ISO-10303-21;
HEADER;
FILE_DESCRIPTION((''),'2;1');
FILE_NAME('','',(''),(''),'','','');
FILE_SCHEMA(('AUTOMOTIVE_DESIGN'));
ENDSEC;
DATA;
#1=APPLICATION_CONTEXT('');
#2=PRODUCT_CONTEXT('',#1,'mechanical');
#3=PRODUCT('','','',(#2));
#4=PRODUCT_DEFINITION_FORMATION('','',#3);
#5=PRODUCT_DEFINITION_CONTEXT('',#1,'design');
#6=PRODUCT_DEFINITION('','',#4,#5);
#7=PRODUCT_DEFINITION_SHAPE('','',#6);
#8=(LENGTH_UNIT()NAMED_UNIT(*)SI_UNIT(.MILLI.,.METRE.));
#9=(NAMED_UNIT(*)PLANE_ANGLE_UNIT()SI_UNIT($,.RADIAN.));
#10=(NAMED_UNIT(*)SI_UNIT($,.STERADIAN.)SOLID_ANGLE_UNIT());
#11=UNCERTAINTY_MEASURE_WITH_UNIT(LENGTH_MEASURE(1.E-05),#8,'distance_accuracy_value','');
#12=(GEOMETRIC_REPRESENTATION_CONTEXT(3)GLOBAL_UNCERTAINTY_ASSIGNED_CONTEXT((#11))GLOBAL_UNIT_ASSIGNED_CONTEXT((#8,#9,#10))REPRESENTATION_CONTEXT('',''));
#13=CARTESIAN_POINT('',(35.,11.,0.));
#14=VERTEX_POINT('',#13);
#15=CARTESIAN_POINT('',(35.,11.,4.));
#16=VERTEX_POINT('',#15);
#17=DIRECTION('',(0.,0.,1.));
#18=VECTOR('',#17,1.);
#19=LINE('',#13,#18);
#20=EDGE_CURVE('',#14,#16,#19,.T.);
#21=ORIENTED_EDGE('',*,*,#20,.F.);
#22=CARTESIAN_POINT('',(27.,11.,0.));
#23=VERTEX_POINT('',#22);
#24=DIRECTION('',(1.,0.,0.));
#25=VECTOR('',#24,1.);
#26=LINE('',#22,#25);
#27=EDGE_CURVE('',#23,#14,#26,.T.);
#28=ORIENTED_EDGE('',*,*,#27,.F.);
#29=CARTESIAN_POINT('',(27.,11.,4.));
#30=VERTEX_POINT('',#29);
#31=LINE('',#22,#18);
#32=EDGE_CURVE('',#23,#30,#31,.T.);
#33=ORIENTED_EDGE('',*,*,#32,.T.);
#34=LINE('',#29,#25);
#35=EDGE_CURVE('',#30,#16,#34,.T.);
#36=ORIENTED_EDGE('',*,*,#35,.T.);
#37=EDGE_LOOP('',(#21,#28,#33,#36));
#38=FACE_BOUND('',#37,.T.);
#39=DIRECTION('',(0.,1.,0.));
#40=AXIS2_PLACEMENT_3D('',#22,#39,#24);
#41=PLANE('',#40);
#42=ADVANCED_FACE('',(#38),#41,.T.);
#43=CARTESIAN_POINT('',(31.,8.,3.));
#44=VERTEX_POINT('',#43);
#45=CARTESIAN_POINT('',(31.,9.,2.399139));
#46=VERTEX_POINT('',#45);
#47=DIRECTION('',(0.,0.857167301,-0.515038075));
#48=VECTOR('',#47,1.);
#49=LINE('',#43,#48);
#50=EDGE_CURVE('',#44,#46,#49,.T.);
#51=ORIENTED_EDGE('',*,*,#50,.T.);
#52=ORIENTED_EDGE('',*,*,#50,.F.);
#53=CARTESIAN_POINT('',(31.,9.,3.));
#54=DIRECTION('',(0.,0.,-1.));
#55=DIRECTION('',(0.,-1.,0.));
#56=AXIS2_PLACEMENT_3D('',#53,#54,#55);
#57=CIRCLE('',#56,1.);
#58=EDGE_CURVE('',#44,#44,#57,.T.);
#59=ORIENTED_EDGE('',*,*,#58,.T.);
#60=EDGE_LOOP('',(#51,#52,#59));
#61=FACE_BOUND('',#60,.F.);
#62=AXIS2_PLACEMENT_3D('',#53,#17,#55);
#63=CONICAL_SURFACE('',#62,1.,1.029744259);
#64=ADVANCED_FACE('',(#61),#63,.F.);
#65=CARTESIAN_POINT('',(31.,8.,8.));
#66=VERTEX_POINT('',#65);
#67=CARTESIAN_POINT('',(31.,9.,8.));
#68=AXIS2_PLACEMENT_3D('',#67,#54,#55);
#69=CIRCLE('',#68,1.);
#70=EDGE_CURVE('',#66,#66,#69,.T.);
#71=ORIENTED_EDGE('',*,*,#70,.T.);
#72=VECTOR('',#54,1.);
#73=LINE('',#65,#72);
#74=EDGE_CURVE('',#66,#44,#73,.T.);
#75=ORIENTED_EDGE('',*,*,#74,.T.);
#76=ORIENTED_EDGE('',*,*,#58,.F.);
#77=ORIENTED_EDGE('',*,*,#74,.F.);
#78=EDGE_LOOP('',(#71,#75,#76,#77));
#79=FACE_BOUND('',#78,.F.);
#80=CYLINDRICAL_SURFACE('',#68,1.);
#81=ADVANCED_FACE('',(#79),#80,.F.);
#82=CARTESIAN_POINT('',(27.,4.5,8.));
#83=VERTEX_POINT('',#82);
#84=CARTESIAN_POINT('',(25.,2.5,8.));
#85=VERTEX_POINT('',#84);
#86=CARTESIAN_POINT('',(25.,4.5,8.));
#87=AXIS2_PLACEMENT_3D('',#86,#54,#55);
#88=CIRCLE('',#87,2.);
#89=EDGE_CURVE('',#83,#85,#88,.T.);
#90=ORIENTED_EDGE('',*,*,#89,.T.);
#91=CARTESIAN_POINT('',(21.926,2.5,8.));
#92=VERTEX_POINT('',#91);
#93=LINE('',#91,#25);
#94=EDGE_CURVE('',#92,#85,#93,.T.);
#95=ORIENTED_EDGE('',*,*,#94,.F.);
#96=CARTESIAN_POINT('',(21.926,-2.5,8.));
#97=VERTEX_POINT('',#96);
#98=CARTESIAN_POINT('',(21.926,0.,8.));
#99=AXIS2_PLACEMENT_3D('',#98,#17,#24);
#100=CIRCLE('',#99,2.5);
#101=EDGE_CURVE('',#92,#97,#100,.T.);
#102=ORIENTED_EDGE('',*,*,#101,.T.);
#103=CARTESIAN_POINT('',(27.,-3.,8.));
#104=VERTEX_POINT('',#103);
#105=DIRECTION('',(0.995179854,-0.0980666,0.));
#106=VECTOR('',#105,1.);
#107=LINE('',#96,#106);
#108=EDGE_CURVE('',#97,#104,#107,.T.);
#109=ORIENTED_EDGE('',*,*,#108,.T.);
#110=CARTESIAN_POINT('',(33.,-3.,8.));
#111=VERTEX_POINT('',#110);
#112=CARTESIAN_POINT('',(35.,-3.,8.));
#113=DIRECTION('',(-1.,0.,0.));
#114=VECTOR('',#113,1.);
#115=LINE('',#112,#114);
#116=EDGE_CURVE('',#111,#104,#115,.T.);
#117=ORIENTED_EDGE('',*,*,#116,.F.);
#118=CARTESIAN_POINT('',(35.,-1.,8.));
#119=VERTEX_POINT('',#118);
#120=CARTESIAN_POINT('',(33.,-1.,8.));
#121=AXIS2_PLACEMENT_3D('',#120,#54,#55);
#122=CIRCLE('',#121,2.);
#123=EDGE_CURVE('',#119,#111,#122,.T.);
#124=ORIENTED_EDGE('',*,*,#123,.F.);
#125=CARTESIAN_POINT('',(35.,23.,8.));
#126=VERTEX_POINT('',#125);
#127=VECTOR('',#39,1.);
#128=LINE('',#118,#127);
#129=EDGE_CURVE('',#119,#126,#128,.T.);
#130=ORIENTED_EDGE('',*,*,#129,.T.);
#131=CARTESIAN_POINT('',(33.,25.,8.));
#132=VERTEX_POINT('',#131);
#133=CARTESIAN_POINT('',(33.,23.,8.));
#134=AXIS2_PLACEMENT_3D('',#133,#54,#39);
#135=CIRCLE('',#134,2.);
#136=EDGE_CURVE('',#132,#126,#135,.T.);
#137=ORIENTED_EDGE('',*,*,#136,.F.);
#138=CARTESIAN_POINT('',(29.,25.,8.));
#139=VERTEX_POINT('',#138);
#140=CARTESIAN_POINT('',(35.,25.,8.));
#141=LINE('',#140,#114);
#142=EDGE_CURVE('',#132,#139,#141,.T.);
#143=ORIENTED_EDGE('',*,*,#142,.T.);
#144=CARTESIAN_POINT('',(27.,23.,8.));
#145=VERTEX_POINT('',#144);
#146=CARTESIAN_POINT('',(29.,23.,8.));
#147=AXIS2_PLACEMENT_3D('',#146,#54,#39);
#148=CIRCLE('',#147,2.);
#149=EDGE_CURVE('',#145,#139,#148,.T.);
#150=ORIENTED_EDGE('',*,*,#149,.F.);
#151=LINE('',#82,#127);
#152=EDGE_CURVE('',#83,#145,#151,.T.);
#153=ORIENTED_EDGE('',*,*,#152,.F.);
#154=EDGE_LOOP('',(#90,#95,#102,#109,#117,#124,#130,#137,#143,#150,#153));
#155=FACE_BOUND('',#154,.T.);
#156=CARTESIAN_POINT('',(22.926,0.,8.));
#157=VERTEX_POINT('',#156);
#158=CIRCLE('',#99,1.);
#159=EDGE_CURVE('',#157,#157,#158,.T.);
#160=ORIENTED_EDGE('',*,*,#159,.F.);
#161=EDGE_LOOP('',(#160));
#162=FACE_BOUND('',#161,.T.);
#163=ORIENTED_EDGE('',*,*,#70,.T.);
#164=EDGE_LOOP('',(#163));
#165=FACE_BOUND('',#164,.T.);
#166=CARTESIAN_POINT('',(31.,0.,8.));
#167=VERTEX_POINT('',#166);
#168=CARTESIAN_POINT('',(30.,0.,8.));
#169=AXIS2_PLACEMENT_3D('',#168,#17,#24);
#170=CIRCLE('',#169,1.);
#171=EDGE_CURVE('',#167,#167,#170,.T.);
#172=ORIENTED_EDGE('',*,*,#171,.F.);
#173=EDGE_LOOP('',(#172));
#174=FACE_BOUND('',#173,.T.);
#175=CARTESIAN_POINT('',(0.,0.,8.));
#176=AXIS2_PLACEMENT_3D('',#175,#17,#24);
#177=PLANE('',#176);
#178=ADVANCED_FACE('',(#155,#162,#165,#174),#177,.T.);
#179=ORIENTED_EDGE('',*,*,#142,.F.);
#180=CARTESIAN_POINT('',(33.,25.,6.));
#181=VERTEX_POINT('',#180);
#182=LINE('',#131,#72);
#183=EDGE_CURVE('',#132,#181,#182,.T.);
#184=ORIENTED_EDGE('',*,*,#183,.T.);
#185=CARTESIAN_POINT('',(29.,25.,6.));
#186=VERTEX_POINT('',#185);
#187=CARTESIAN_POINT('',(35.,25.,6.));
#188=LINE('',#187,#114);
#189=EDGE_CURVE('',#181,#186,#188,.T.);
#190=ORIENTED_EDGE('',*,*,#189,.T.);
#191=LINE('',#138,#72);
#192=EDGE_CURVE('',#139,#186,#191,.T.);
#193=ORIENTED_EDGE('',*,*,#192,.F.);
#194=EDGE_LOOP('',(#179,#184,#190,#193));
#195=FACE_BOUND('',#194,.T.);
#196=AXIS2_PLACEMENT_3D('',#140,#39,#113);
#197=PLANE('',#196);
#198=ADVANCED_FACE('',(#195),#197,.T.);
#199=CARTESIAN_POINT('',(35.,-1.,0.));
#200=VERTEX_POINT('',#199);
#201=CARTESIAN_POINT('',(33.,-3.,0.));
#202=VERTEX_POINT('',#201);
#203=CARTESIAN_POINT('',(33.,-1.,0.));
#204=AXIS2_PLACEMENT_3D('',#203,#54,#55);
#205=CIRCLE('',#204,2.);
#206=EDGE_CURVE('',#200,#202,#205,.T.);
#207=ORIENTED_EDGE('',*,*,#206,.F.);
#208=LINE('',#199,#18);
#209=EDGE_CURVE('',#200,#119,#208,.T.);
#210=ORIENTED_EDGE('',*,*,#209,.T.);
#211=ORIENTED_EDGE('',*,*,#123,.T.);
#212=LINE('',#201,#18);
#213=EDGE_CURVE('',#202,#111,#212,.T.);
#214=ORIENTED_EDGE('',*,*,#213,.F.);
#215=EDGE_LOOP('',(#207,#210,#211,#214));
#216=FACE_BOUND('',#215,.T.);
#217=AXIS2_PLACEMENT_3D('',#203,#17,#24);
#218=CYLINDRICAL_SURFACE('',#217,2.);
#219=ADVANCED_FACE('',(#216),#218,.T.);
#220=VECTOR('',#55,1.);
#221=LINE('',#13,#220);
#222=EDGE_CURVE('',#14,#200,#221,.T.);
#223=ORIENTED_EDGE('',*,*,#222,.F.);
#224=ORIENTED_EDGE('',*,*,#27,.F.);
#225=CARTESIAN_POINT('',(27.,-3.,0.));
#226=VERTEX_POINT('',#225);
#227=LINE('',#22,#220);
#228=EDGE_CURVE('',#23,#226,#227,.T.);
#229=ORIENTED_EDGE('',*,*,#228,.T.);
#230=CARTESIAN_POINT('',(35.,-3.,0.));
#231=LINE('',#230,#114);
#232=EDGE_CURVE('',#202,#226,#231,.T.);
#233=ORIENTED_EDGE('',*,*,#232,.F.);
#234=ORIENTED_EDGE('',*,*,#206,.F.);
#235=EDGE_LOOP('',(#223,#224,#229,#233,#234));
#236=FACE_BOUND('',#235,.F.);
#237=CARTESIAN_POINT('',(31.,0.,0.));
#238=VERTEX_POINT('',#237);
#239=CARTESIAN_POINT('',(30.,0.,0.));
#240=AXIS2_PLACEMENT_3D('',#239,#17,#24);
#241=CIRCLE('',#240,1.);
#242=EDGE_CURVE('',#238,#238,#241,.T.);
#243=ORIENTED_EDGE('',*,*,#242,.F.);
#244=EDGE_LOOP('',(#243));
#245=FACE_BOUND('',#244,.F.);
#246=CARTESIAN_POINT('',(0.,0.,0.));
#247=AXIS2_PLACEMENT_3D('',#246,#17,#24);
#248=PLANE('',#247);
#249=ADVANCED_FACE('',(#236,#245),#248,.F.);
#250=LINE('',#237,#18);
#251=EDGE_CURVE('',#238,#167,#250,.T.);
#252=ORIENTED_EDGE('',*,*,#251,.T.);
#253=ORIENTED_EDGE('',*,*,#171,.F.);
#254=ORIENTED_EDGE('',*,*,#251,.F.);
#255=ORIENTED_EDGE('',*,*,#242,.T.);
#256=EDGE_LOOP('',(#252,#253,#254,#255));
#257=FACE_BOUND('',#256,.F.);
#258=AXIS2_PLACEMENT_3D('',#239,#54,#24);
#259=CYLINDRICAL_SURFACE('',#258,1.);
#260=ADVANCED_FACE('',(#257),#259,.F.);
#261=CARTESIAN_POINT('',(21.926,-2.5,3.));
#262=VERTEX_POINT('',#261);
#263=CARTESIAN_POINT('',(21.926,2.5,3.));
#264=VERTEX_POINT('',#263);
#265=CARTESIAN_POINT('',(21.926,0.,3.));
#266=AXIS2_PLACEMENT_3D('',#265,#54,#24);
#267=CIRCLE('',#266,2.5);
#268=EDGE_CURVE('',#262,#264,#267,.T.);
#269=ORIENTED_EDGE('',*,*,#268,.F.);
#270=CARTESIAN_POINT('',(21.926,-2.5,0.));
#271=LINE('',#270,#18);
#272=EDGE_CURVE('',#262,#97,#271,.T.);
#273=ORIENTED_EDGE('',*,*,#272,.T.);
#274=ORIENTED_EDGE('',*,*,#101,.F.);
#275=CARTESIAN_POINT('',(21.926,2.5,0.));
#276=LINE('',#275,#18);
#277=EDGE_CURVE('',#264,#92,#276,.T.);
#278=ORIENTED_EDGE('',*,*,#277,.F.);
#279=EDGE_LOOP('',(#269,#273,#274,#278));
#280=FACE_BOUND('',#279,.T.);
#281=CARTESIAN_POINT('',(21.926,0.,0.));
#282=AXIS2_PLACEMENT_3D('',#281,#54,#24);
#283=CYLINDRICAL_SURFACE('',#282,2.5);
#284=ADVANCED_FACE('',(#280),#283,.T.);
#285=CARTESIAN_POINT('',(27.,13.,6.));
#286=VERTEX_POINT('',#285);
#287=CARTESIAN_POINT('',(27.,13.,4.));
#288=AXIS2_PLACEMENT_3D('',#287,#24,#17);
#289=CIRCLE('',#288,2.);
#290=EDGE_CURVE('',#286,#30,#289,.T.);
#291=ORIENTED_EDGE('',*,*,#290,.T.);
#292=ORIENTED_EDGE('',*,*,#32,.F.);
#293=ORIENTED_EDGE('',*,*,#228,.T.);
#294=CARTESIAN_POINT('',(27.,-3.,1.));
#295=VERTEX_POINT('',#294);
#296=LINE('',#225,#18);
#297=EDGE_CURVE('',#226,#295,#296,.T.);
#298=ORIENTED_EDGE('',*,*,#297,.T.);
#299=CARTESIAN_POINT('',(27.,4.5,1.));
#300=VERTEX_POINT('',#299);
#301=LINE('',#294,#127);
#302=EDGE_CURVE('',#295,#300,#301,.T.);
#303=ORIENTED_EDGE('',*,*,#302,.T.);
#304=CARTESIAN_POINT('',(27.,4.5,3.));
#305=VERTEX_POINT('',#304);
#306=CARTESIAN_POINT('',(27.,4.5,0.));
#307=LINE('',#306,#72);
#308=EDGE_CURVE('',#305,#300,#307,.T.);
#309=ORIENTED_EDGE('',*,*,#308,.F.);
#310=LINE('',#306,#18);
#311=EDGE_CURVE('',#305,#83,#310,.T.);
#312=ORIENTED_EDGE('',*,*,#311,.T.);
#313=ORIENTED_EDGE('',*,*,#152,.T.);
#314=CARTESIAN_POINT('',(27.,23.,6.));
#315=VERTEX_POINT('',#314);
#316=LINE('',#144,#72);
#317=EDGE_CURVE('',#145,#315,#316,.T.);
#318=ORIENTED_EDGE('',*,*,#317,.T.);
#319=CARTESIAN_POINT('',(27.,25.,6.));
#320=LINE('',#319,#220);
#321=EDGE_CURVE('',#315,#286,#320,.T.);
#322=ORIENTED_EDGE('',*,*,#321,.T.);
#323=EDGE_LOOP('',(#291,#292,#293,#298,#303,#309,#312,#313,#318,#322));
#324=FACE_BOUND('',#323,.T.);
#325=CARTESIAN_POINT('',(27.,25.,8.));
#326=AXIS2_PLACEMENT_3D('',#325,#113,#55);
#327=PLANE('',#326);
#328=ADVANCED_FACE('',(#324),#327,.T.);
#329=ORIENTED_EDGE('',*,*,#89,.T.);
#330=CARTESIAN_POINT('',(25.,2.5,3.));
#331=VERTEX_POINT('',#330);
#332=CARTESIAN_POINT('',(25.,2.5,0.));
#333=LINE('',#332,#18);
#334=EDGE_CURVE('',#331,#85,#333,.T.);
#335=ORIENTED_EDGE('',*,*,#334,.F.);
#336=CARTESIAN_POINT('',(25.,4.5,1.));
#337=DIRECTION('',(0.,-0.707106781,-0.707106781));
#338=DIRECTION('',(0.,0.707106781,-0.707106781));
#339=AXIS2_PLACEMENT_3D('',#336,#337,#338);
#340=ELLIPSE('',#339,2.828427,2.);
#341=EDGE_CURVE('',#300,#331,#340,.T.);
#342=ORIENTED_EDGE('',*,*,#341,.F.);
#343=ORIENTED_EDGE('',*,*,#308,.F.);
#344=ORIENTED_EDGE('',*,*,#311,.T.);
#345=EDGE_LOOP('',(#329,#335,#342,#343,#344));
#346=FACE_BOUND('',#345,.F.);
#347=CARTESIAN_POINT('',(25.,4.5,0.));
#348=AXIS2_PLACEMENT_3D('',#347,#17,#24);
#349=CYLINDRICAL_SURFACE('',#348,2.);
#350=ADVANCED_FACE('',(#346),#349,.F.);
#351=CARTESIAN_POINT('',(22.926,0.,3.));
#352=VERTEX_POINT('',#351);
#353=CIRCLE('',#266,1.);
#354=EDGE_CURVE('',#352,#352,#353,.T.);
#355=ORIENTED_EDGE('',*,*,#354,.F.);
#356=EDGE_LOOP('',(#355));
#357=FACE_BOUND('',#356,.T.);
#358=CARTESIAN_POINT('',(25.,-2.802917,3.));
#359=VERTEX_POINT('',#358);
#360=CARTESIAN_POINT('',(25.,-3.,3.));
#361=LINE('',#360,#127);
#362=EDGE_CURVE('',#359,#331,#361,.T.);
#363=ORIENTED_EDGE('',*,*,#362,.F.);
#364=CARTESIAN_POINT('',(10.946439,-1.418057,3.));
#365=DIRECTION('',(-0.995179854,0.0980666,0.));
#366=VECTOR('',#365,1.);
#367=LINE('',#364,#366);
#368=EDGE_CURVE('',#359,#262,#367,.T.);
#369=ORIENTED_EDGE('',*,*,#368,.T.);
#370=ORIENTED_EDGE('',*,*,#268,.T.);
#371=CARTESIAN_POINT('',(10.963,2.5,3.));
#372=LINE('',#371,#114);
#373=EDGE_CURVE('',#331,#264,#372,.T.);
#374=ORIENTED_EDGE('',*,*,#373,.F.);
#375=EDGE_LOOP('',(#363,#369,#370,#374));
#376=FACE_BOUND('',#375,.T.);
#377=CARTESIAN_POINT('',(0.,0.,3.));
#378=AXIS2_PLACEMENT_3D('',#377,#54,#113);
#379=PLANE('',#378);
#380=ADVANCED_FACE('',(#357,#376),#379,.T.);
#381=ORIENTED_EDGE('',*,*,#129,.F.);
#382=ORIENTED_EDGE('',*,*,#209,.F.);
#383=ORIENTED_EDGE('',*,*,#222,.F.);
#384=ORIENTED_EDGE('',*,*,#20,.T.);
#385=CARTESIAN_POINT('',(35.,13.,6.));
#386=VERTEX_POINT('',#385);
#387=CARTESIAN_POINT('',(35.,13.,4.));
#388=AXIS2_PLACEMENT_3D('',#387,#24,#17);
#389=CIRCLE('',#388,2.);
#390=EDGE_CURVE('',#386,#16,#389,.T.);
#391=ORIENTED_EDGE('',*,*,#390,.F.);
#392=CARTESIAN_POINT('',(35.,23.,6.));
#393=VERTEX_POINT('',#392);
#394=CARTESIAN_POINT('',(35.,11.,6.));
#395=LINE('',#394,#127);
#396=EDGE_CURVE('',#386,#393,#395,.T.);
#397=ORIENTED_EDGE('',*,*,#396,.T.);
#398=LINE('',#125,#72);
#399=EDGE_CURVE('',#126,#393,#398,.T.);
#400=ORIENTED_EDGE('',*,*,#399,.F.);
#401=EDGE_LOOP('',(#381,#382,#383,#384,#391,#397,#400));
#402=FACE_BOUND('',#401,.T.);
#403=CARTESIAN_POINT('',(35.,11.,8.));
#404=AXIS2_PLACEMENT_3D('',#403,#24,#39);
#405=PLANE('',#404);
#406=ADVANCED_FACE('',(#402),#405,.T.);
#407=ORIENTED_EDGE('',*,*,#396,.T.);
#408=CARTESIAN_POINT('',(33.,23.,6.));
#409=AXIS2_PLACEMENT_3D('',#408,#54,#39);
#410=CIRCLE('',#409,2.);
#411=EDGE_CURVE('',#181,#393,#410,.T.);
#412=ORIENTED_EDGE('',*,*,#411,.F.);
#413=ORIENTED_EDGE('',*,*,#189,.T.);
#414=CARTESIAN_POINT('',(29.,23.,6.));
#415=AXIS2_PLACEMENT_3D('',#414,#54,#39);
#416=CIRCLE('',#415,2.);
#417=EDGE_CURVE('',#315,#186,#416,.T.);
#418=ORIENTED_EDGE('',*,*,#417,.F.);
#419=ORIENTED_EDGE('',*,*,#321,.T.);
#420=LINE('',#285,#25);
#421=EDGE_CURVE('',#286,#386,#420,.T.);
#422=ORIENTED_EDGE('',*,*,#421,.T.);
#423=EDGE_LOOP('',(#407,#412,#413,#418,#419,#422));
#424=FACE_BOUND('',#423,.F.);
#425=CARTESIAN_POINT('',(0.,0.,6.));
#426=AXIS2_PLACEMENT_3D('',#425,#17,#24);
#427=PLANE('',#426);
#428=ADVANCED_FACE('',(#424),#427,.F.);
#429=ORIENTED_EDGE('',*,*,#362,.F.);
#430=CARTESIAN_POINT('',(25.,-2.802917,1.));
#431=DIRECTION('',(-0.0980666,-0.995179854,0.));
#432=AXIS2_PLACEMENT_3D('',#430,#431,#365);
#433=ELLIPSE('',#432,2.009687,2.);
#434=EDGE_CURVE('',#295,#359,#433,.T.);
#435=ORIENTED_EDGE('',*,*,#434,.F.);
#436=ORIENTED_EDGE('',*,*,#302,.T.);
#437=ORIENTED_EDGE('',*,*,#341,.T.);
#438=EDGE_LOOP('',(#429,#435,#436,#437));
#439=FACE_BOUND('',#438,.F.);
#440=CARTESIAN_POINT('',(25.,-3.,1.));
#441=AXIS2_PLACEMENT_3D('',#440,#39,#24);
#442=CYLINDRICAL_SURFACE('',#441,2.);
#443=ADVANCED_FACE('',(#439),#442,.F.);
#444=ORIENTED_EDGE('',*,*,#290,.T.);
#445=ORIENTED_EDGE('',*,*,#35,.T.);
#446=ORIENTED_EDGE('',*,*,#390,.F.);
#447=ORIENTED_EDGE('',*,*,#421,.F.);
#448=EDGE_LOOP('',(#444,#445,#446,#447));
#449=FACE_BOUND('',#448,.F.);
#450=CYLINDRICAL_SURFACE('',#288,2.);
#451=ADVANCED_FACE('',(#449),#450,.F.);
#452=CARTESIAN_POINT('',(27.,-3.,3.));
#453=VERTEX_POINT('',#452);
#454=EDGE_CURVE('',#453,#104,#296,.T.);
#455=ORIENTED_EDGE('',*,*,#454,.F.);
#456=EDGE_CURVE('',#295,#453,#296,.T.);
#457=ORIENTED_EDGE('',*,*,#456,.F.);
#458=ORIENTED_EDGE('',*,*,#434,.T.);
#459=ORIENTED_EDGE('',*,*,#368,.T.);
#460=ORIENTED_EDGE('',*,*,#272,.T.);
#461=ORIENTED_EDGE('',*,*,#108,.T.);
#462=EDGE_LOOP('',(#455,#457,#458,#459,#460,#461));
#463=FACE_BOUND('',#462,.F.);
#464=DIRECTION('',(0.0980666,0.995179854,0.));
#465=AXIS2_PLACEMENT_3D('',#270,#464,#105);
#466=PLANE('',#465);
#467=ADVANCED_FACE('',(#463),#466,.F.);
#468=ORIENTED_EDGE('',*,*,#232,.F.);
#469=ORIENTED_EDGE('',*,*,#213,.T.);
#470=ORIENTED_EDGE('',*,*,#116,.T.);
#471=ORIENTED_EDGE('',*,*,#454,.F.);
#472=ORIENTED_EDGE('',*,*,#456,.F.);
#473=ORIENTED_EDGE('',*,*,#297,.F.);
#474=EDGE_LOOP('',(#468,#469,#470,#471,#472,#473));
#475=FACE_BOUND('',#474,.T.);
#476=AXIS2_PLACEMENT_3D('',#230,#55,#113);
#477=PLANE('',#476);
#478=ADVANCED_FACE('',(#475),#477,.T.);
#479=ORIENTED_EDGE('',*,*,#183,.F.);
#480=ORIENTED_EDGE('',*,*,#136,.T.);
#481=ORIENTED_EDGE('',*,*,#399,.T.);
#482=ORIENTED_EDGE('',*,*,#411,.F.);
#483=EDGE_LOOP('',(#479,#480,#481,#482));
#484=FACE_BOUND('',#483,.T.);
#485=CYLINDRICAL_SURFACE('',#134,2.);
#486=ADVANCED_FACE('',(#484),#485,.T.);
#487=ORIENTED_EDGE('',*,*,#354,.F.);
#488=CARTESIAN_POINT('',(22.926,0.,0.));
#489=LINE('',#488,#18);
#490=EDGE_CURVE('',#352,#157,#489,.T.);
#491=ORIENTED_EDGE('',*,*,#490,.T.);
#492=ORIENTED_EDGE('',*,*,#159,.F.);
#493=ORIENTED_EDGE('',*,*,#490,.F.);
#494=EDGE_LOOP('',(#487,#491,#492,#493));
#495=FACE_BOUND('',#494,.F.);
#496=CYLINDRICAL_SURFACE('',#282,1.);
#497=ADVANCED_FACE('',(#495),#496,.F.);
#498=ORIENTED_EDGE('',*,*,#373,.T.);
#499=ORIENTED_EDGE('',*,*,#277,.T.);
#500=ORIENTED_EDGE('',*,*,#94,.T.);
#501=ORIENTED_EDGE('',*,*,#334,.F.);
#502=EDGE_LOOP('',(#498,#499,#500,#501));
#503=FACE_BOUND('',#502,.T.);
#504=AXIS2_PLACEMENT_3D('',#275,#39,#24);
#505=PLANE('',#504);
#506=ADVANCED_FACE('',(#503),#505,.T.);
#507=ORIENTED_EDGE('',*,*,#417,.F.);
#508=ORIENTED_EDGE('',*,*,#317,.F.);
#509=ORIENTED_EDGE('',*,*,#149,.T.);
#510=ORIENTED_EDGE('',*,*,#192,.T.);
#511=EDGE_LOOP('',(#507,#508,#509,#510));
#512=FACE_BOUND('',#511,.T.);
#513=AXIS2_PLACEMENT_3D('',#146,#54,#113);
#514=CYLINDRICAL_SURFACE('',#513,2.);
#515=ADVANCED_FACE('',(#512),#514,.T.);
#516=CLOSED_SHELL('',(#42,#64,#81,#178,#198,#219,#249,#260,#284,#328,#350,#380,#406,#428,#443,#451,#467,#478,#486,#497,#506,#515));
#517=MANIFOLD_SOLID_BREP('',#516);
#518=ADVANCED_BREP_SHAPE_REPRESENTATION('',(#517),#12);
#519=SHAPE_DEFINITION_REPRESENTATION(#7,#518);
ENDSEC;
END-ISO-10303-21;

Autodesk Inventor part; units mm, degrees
ref_plane "YZ Plane" through (0, 0, 0) normal (1, 0, 0) x (0, 1, 0)
ref_plane "XZ Plane" through (0, 0, 0) normal (0, 1, 0) x (-1, 0, 0)
ref_plane "XY Plane" through (0, 0, 0) normal (0, 0, 1) x (1, 0, 0)
sketch "Sketch1" plane through (0, 0, 0) normal (0, 0, 1) x (1, 0, 0)
  circle A0 centre (30, 0) radius 1
  circle A1 centre (21.926, 0) radius 1
  line L0 (27, 11) -> (35, 11)
  line L1 (35, 11) -> (35, -3)
  line L2 (35, -3) -> (27, -3)
  line L3 (27, -3) -> (27, 11)
  circle A2 centre (21.926, 0) radius 2.5
  line L4 (21.926, -2.5) -> (27, -3)
  line L5 (21.926, 2.5) -> (27, 2.5)
  point P0 (0, 0)
  dimension "d0" = 21.926
  dimension "d1" = 30
  dimension "d2" = 2
  dimension "d3" = 2
  dimension "d4" = 3
  dimension "d5" = 5
  dimension "d6" = 3
  dimension "d7" = 11
  dimension "d8" = 5
extrude "Extrusion1" add sketch "Sketch1" along normal blind 8
fillet "Fillet1" radius 2 2 edges at (27, 2.5, 4) (35, -3, 4)
sketch "Sketch2" plane through (0, 0, 8) normal (0, 0, 1) x (1, 0, 0)
  line L0 (27, 11) -> (27, 4.5) projected
  line L1 (27, 11) -> (35, 11)
  line L2 (35, 11) -> (35, 25)
  line L3 (35, 25) -> (27, 25)
  line L4 (27, 25) -> (27, 11)
  line L5 (35, -1) -> (35, 11) projected
  circle A0 centre (30, 0) radius 1 projected
  point P0 (0, 0)
  dimension "d12" = 25
extrude "Extrusion2" add sketch "Sketch2" against normal blind 2 contours L4 L3 L2 L1
fillet "Fillet2" radius 2 1 edges at (31, 11, 6)
fillet "Fillet3" radius 2 2 edges at (35, 25, 7) (27, 25, 7)
sketch "Sketch3" plane through (0, 0, 8) normal (0, 0, 1) x (1, 0, 0)
  line L0 (35, -1) -> (35, 23) projected
  line L1 (27, 23) -> (27, 4.5) projected
  circle A0 centre (30, 0) radius 1 projected
  point P0 (0, 0)
  point P1 (31, 9)
  dimension "d17" = 8
  dimension "d18" = 4
  dimension "d19" = 9
hole "Hole1" at (31, 9, 8) direction (0, 0, -1) diameter 2 depth 5 tip angle 118
sketch "Sketch4" plane through (0, 0, 0) normal (0, 0, -1) x (-1, 0, 0)
  line L0 (-27, 11) -> (-27, 4.5) projected
  line L1 (-17, -3) -> (-27, -3)
  line L2 (-27, -3) -> (-27, 5)
  line L3 (-27, 5) -> (-17, 5)
  line L4 (-17, 5) -> (-17, -3)
  line L5 (-27, -3) -> (-33, -3) projected
  point P0 (0, 0)
  dimension "d27" = 10
  dimension "d28" = 8
extrude "Extrusion3" cut sketch "Sketch4" against normal blind 3
fillet "Fillet4" radius 2 1 edges at (27, 0.75, 3)
properties part number "front_v2"
